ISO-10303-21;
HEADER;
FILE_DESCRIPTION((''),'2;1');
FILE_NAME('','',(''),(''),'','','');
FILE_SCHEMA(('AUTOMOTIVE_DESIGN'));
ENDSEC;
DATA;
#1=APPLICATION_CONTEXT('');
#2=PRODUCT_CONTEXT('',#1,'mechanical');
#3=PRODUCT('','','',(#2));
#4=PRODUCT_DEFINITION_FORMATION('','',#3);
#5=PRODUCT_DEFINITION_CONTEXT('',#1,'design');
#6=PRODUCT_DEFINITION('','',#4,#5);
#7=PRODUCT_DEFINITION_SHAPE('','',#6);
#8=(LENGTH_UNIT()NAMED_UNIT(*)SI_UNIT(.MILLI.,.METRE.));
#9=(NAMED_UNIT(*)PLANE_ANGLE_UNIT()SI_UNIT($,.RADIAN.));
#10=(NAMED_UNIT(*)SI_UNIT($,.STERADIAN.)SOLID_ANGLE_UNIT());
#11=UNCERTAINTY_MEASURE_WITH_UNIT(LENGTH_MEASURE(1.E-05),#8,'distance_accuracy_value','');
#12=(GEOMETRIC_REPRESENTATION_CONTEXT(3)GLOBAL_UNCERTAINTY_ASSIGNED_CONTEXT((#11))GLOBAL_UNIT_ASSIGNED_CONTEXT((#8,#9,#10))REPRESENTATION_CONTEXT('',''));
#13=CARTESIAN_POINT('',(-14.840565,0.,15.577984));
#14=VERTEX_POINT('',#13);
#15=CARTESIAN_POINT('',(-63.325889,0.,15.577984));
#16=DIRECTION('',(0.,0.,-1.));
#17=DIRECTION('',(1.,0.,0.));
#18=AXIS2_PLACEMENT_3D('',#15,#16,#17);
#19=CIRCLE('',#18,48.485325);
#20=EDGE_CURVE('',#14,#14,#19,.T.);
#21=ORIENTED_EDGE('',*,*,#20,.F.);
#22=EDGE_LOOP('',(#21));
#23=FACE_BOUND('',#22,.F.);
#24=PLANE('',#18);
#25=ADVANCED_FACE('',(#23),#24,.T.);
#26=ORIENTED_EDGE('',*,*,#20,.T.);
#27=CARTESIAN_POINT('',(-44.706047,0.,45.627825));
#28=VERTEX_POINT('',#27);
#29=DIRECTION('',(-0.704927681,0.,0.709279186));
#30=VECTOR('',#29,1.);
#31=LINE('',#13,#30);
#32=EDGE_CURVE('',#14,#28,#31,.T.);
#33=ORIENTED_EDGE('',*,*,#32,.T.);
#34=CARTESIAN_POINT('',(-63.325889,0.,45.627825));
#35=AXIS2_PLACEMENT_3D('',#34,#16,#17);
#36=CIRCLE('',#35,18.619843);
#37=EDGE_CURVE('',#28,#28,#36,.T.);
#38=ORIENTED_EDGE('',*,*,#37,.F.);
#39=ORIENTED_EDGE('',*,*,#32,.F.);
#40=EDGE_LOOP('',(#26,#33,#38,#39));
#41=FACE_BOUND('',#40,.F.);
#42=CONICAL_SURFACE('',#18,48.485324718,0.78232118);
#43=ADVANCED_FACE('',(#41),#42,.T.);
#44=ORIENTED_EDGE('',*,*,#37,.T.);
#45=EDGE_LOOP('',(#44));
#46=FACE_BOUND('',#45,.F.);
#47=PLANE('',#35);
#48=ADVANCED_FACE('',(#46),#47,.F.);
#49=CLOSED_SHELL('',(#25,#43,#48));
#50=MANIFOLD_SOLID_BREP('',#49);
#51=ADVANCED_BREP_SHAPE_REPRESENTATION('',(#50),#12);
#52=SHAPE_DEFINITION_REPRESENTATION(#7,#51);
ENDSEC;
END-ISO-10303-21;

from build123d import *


# Not quite as in the source:
# - the program builds the solid bodies; features that only make, move or delete a surface that nothing else refers to are left out


with BuildPart() as f1:
    # F0 (on Front) → F1 (revolve)
    with BuildSketch(Plane.XZ):
        Polygon((-44.7060465813, 45.6278249621), (-63.3258894086, 45.6278249621), (-63.3258894086, 15.5779840425), (-14.8405646905, 15.5779840425), align=None)
    revolve(axis=Axis((-63.3258894086, 0, 30.6029045023), (0, 0, -1)))


solid = f1.part
